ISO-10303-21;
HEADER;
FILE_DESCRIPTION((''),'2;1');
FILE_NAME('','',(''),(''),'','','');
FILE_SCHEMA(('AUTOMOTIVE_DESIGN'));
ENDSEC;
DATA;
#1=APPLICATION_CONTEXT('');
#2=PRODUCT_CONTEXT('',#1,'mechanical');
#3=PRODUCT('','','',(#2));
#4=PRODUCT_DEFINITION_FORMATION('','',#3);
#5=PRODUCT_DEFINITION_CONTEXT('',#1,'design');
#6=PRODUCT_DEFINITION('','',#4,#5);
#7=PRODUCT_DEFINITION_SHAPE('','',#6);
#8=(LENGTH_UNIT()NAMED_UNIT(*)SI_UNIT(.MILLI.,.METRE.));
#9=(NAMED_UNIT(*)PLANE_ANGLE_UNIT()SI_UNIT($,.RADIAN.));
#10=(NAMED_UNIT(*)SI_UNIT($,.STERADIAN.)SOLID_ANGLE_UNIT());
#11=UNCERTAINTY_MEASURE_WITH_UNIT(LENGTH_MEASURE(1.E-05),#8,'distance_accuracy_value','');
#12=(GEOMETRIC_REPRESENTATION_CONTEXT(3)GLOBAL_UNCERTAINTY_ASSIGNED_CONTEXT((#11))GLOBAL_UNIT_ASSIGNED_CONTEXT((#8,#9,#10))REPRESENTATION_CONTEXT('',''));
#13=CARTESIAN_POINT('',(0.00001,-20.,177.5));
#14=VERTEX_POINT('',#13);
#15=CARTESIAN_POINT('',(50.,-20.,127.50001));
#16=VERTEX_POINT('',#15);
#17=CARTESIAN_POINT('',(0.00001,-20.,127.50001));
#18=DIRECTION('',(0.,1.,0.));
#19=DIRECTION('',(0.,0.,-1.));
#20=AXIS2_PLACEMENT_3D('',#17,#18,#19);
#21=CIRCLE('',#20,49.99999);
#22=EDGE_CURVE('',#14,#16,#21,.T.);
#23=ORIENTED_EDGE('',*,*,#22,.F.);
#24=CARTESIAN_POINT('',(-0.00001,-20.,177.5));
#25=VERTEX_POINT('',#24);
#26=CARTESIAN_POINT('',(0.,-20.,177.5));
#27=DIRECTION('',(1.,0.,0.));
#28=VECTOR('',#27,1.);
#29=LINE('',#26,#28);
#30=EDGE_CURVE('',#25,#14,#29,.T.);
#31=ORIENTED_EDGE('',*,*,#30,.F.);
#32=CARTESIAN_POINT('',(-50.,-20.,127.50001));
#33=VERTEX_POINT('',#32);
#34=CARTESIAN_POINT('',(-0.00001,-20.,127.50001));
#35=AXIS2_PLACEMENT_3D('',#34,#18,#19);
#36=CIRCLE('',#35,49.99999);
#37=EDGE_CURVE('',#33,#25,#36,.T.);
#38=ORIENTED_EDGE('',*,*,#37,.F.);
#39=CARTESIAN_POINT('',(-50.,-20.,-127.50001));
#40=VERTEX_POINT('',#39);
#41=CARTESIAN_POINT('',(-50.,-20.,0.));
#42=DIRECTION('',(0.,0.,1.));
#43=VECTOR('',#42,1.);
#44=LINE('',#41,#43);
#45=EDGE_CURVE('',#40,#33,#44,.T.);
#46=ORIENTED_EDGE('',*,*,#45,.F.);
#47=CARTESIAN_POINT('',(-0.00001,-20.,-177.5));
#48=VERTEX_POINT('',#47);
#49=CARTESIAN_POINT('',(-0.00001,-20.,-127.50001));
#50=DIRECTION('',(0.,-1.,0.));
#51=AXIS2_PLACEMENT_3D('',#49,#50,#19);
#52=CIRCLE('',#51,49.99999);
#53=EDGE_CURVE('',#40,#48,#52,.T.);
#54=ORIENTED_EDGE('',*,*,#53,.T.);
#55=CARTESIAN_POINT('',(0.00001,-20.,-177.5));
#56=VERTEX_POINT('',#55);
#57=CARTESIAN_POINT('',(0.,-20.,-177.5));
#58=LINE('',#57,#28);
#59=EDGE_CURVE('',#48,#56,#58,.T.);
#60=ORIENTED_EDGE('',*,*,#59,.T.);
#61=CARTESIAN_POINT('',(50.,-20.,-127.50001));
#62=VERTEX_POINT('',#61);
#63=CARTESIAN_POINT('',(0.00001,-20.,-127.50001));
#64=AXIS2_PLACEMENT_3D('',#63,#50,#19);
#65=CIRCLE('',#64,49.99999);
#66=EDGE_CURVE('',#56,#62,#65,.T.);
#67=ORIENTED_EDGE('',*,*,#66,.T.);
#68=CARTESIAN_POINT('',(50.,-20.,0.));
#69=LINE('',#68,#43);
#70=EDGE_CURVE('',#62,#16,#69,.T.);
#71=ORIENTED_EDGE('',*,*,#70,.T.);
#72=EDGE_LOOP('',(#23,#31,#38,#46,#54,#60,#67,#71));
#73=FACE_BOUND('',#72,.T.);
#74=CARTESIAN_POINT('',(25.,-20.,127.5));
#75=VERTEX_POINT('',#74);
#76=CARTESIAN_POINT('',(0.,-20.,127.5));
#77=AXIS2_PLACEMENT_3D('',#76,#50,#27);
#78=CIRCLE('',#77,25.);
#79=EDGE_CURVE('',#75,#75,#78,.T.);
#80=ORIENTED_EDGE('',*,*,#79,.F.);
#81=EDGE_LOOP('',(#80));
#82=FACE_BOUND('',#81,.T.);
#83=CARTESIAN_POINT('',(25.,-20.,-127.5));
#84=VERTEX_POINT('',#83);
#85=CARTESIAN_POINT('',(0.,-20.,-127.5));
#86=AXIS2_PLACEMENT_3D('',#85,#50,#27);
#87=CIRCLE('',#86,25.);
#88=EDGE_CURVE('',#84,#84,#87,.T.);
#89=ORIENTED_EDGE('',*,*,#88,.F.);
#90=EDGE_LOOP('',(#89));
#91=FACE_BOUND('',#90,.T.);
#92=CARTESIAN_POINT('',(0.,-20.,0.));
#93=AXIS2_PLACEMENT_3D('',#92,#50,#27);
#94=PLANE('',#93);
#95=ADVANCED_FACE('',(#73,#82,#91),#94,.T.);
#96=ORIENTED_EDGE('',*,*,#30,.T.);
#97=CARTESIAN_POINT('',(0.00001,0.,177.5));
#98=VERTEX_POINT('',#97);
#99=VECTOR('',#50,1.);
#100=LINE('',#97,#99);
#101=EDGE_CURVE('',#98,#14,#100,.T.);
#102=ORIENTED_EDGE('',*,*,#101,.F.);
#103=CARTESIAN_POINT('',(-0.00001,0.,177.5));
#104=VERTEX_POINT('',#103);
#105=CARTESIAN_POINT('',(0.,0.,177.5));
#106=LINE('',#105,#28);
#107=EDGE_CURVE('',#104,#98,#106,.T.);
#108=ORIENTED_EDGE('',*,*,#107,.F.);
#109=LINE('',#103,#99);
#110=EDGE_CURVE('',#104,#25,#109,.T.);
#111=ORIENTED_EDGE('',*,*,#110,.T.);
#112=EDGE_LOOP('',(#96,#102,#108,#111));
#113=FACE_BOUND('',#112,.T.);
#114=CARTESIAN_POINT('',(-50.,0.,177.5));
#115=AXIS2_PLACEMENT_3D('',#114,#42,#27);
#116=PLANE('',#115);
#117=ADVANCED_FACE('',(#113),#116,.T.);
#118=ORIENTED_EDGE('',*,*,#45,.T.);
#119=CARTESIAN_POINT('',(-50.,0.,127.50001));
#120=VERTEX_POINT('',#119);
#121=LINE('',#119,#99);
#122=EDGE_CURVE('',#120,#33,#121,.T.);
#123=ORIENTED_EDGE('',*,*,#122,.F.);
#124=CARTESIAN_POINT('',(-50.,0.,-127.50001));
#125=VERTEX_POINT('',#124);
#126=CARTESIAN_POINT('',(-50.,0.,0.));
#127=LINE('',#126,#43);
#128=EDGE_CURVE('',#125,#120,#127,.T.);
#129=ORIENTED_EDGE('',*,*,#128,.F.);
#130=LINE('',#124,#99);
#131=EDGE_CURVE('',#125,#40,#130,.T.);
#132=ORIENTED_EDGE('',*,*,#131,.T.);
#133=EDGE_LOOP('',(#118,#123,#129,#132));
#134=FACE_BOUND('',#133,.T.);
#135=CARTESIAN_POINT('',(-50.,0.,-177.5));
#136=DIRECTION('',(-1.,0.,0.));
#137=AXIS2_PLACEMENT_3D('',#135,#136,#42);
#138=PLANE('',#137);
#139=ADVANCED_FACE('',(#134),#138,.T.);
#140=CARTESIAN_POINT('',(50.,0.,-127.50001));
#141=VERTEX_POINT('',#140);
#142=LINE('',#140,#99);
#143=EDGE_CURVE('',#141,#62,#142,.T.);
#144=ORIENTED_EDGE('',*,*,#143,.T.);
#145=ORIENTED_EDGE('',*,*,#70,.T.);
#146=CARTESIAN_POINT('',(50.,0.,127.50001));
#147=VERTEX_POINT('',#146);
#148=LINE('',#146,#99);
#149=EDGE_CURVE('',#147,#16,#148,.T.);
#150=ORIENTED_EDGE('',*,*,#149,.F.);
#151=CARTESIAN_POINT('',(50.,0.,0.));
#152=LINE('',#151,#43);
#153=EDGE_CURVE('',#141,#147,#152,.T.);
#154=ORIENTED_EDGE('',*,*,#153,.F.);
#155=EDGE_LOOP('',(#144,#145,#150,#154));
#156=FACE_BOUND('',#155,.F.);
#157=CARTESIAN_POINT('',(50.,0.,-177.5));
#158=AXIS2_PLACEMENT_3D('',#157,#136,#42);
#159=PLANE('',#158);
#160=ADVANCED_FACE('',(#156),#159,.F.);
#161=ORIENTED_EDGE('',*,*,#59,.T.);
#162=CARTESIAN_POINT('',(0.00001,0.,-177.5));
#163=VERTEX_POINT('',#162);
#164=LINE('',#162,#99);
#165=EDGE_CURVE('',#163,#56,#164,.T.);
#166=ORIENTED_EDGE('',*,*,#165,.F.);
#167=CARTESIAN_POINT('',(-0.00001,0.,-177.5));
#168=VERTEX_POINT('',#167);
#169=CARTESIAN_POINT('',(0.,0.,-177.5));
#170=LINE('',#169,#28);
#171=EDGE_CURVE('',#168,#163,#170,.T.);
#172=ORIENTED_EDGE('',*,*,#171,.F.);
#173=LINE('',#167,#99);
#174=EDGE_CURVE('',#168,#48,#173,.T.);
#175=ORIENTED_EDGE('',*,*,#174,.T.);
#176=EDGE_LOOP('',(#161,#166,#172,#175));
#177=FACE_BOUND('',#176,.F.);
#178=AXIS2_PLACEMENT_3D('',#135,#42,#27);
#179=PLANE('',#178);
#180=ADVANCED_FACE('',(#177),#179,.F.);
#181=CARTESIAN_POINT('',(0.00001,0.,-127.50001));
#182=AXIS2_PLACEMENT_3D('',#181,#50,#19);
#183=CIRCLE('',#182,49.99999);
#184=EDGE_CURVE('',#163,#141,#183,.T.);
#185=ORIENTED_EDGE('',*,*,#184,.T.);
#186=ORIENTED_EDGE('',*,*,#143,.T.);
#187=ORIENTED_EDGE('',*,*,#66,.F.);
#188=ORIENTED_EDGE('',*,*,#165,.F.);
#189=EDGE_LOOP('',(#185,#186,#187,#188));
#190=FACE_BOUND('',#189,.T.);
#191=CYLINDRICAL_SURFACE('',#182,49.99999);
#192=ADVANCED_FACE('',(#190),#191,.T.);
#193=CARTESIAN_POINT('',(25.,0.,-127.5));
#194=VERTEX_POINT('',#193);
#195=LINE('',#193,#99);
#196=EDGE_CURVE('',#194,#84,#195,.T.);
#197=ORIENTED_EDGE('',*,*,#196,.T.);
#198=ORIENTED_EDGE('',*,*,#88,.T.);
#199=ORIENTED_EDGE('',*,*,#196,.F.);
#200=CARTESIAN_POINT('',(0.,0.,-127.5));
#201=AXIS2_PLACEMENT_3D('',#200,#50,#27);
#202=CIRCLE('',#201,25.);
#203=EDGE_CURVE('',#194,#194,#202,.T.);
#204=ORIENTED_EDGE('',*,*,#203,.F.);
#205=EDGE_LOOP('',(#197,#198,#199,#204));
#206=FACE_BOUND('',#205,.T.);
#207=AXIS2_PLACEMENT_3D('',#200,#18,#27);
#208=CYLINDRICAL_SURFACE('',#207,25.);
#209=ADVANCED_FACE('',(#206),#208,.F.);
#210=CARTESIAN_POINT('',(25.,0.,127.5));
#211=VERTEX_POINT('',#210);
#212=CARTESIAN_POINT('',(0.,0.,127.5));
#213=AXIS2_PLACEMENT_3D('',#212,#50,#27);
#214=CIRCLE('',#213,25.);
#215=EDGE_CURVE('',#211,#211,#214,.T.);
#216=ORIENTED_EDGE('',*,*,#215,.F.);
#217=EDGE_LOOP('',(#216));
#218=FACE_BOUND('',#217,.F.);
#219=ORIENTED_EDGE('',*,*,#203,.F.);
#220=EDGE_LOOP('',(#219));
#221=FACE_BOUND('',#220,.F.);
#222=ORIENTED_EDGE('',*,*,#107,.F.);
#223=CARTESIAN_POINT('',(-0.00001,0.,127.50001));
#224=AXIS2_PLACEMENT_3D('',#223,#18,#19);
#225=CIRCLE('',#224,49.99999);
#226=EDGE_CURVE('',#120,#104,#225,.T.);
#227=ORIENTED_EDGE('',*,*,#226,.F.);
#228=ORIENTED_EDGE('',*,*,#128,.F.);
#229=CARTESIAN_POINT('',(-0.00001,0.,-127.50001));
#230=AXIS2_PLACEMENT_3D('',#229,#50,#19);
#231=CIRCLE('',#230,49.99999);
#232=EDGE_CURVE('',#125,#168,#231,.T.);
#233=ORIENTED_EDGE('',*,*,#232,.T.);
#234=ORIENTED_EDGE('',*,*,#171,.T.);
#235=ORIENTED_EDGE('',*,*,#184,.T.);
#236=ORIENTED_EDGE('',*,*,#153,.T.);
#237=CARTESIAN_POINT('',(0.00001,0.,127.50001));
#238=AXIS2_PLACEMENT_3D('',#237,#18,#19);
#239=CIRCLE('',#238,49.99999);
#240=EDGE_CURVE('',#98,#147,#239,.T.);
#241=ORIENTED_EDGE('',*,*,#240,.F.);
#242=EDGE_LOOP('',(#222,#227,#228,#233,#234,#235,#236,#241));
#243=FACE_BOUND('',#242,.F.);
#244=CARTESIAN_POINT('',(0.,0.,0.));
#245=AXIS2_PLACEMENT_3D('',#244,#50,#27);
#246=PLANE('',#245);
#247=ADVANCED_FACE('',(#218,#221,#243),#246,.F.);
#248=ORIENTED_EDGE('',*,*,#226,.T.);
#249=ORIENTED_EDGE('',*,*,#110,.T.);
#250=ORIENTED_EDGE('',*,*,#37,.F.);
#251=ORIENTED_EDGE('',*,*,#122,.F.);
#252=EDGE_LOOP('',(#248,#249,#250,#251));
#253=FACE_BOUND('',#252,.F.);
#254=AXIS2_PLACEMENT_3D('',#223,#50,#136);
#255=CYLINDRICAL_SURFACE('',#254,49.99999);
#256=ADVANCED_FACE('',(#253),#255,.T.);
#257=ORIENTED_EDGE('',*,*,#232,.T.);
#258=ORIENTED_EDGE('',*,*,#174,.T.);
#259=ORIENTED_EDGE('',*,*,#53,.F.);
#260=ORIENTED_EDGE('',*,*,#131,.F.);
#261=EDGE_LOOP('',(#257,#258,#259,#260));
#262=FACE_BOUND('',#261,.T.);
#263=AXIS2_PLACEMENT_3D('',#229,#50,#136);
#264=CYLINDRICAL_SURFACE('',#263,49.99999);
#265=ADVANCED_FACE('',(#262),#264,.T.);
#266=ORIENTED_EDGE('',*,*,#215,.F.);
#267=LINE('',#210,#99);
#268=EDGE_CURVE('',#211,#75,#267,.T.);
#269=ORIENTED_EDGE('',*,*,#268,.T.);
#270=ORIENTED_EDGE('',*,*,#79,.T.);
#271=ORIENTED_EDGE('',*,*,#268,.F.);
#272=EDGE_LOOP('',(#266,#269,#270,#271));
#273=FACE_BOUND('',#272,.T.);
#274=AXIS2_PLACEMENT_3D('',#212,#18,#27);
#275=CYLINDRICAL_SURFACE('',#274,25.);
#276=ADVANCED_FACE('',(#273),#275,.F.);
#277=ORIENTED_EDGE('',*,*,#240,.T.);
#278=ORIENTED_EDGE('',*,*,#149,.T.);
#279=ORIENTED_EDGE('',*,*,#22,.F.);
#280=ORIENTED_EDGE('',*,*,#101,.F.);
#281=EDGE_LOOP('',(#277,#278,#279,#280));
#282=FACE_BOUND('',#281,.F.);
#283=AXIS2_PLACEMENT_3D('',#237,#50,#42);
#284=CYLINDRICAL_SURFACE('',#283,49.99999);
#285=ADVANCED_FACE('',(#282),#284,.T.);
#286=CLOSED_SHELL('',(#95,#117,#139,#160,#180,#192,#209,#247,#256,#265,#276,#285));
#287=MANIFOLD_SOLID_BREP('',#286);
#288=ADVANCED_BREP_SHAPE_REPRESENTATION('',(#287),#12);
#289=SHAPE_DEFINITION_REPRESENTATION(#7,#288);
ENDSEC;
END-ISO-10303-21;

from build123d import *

# Parameters (mm, degrees)
F0_W     = 100
F0_H     = 355
F0_R     = 25
F1_DEPTH = 20
F2_R     = 49.99999


# Not quite as in the source:
# - a fillet or chamfer is up to 0.001 mm smaller than in the source, because OpenCascade refuses the exact size


with BuildPart() as f1:
    # F0 (on Front) → F1 (new body)
    with BuildSketch(Plane.XZ):
        Rectangle(F0_W, F0_H)
        with Locations((0, -127.5)):
            Circle(F0_R, mode=Mode.SUBTRACT)
        with Locations((0, 127.5)):
            Circle(F0_R, mode=Mode.SUBTRACT)
    extrude(amount=F1_DEPTH)

    # F2 (radius 50 in the source; OpenCascade refuses exactly that, so slightly less here)
    f2_edges = [f1.edges().sort_by_distance(p)[0] for p in [
        (50, -10, 177.5),
        (-50, -10, 177.5),
        (50, -10, -177.5),
        (-50, -10, -177.5),
    ]]
    fillet(f2_edges, radius=F2_R)


solid = f1.part
